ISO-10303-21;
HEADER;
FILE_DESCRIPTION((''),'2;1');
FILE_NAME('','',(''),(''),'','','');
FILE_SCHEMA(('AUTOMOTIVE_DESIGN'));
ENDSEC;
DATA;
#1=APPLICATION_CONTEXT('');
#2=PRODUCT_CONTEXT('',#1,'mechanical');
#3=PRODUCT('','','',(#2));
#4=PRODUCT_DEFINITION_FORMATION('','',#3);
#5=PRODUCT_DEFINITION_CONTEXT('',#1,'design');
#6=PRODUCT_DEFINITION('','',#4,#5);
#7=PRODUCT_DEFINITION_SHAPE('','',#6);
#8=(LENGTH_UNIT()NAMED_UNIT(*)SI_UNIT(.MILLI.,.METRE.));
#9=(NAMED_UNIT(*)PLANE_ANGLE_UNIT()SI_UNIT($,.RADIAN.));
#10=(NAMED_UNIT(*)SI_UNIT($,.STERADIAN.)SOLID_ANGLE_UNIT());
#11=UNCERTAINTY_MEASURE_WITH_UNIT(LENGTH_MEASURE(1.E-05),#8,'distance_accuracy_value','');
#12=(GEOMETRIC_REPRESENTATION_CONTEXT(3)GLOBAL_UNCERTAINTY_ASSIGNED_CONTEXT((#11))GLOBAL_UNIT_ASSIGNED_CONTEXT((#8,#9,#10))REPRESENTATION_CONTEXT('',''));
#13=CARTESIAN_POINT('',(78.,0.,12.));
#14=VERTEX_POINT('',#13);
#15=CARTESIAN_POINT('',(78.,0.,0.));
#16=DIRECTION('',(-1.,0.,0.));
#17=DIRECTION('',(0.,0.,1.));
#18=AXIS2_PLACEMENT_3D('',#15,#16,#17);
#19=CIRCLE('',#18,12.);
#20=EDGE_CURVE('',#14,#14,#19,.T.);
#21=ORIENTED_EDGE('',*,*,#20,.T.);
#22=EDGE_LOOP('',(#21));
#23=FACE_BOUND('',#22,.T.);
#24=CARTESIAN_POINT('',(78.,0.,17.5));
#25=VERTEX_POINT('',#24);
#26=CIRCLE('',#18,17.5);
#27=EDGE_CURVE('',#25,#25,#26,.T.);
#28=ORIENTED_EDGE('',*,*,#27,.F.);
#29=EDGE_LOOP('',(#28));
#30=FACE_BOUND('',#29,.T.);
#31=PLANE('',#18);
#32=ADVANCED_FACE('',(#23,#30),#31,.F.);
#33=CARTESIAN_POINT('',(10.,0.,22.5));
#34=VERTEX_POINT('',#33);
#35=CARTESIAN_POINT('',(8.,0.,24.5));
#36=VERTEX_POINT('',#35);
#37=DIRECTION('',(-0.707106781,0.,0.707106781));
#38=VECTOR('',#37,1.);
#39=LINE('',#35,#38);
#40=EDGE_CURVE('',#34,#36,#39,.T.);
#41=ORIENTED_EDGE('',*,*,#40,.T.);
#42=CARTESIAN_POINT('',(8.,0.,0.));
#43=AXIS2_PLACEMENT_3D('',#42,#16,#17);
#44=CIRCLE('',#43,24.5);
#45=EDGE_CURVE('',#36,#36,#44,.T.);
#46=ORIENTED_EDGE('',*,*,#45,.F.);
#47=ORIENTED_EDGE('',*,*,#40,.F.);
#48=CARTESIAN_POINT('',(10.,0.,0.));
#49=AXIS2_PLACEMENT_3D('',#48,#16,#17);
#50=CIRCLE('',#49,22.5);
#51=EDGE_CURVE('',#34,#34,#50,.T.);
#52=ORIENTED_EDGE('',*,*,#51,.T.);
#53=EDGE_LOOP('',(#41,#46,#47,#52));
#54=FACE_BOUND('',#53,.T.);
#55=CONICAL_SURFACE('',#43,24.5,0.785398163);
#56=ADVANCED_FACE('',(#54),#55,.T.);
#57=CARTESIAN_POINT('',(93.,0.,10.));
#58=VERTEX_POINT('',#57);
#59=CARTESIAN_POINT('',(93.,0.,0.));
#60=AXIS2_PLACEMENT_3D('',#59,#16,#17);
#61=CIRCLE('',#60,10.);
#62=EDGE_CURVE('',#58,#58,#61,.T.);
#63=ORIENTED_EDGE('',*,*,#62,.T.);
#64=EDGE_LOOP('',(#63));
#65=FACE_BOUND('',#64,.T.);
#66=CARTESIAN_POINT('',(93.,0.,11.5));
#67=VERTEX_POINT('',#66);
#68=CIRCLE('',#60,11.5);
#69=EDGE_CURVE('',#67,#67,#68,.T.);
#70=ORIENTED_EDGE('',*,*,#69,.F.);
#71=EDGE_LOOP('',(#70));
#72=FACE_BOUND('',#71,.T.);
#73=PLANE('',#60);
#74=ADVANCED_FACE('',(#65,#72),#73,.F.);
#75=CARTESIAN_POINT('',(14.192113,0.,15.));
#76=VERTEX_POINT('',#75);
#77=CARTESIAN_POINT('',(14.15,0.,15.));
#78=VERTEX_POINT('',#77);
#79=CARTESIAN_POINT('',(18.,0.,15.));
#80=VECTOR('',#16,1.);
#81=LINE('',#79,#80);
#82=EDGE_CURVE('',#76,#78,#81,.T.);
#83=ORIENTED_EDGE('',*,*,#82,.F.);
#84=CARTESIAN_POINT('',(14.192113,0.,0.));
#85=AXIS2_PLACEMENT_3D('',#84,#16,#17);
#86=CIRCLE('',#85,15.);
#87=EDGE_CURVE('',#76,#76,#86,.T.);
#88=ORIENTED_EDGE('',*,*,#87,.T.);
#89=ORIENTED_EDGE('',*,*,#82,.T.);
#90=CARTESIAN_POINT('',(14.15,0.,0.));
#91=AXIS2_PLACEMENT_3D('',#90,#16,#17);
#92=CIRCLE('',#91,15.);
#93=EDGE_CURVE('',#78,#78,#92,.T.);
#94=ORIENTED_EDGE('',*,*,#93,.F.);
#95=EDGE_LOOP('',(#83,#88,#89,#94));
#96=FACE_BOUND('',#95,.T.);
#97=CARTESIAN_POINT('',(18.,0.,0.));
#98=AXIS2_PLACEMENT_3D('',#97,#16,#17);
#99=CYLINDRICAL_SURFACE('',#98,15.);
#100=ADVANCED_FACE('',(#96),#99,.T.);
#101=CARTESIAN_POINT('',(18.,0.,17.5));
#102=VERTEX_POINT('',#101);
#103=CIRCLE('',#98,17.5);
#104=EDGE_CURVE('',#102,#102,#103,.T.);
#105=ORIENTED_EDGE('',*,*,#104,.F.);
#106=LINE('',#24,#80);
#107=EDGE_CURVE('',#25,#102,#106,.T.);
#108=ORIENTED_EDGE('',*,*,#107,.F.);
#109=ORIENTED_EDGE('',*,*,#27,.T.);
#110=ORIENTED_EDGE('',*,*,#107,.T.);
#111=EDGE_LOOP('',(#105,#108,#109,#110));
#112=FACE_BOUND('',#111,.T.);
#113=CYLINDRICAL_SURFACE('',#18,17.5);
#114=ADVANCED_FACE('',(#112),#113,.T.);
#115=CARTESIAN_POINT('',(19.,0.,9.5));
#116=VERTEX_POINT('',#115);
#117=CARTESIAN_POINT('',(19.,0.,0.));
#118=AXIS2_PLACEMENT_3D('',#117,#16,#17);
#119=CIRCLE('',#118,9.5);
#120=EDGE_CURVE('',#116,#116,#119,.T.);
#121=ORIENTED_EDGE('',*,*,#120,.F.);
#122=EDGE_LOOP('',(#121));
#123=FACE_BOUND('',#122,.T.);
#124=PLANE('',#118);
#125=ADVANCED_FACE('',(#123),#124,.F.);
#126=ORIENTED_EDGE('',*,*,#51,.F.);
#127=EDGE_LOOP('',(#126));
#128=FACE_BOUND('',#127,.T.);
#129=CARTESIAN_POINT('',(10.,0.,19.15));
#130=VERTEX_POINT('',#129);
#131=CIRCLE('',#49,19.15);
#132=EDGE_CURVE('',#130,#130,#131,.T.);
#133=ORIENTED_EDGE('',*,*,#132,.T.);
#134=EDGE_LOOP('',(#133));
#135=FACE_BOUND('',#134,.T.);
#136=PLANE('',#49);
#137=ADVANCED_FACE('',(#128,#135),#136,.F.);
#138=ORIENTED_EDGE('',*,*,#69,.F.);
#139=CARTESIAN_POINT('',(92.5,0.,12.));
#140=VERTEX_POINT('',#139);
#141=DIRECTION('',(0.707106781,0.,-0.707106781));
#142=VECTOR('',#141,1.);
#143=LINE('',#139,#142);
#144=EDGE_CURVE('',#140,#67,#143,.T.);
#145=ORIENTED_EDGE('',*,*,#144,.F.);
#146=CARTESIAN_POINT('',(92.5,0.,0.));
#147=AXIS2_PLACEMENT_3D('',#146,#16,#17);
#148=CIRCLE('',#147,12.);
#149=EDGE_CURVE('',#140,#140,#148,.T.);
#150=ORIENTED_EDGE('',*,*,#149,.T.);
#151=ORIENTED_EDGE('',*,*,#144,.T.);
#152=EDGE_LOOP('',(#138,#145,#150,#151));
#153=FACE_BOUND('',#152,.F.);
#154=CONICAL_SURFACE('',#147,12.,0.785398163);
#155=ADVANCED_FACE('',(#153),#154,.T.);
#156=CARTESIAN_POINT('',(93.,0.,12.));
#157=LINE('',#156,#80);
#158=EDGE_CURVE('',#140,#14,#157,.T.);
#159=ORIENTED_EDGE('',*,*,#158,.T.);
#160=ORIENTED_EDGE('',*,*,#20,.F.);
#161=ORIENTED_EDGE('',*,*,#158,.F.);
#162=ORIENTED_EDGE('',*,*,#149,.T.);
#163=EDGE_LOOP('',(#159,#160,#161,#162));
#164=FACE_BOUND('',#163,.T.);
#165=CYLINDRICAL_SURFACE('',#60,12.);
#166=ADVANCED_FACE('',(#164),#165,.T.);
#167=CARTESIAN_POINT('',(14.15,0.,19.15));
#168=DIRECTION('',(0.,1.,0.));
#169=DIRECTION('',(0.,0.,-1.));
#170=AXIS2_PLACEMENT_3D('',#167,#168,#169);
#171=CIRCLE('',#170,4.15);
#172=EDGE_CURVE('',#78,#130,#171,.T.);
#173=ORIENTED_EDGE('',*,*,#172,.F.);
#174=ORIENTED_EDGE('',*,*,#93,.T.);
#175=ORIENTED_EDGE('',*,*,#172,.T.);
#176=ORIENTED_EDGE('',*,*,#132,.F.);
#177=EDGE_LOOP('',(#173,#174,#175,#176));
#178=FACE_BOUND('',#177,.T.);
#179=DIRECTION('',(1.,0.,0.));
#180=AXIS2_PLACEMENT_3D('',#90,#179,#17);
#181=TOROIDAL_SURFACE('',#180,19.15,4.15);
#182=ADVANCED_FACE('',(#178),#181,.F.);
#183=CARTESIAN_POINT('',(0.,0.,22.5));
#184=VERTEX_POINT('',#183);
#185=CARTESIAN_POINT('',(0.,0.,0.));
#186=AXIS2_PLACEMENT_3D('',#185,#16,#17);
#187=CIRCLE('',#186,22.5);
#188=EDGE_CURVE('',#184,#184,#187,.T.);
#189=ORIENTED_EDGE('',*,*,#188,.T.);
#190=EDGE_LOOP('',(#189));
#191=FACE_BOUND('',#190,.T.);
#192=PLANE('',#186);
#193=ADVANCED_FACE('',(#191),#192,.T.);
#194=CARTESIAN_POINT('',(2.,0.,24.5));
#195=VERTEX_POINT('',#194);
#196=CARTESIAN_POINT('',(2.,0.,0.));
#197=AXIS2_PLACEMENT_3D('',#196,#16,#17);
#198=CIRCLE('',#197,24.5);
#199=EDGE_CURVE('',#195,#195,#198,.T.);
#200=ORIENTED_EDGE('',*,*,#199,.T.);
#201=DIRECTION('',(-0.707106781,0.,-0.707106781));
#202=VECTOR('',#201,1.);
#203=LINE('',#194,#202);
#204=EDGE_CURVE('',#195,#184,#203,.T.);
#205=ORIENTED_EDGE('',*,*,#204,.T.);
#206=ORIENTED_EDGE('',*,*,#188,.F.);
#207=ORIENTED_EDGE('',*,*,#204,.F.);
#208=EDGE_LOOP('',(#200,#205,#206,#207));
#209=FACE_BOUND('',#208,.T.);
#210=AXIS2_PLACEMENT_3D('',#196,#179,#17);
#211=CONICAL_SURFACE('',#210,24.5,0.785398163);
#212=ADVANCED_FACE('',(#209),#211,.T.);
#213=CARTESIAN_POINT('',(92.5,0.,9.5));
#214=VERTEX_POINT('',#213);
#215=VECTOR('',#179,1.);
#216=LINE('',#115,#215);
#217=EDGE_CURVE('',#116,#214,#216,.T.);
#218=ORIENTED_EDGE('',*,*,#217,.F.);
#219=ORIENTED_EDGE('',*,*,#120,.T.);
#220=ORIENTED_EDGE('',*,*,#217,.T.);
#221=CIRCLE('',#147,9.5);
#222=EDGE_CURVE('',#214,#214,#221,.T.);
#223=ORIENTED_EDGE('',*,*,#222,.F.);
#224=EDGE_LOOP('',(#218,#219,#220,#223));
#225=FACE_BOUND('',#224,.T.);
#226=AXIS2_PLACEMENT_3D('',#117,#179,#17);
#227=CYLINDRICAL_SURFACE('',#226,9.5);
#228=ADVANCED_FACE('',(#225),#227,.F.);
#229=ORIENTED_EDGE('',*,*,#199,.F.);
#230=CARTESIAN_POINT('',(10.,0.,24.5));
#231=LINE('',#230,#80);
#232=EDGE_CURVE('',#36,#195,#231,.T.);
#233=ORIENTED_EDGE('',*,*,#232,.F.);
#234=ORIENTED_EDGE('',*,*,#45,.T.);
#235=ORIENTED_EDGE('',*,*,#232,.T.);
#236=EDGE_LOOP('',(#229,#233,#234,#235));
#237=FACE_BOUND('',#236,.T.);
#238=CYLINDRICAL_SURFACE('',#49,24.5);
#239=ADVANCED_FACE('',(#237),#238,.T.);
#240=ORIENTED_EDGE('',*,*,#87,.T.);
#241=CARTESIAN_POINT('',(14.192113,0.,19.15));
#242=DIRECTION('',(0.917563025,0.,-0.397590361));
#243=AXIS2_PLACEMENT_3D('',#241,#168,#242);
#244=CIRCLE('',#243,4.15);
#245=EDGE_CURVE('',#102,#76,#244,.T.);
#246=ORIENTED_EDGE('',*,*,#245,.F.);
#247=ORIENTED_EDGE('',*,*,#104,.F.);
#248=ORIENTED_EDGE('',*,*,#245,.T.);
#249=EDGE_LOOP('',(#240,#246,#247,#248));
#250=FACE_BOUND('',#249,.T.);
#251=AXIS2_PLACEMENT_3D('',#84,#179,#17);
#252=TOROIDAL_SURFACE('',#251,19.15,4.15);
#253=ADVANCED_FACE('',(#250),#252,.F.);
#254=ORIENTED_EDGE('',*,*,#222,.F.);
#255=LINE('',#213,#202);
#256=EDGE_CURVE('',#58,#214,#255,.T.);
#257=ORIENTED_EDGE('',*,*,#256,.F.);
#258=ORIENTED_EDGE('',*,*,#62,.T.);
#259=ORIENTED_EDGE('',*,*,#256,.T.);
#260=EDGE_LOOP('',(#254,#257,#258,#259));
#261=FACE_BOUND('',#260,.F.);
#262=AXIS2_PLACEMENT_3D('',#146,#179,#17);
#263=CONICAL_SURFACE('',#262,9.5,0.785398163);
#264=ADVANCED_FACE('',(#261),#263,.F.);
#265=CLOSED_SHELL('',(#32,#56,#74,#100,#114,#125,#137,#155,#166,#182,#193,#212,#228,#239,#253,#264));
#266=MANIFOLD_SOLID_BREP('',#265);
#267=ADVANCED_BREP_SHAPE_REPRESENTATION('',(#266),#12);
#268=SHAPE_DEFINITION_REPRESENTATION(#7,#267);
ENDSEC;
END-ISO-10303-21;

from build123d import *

# Parameters (mm, degrees)
F3_SIZE = 2
F4_SIZE = 0.5


# Not quite as in the source:
# - a fillet or chamfer that OpenCascade refuses, or shapes differently, is made with other operations: its cross-section is extruded or revolved along the edge and cut away or added


with BuildPart() as f1:
    # F0 (on Front) → F1 (revolve)
    with BuildSketch(Plane.XZ):
        Polygon((0, 24.5), (0, 0), (19, 0), (19, 9.5), (93, 9.5), (93, 12), (78, 12), (78, 17.5), (18, 17.5), (18, 15), (10, 15), (10, 24.5), align=None)
    revolve(axis=Axis((9.5, 0, 0), (-1, 0, 0)))

    # F2: fillet of radius 4.15 on 2 edges, made by hand

    # F2_s1 → F2_t2 (revolve)
    with BuildSketch(Plane.XZ):
        with BuildLine():
            ThreePointArc((14.15, 15), (11.2155068581, 16.2155068581), (10, 19.15))
            Line((10, 19.15), (10, 15))
            Line((10, 15), (14.15, 15))
        make_face()
    revolve(axis=Axis((10, 0, 0), (-1, 0, 0)))

    # F2_s3 → F2_t4 (revolve)
    with BuildSketch(Plane.XZ):
        with BuildLine():
            ThreePointArc((18, 17.5), (16.4697218419, 15.6808502483), (14.1921134471, 15))
            Line((14.1921134471, 15), (18, 15))
            Line((18, 15), (18, 17.5))
        make_face()
    revolve(axis=Axis((18, 0, 0), (-1, 0, 0)))

    # F3
    f3_edges = [f1.edges().sort_by_distance(p)[0] for p in [
        (0, 0, -24.5),
        (10, 0, -24.5),
    ]]
    chamfer(f3_edges, length=F3_SIZE)

    # F4
    f4_edges = [f1.edges().sort_by_distance(p)[0] for p in [
        (93, 0, -12),
        (93, 0, -9.5),
    ]]
    chamfer(f4_edges, length=F4_SIZE)


solid = f1.part
